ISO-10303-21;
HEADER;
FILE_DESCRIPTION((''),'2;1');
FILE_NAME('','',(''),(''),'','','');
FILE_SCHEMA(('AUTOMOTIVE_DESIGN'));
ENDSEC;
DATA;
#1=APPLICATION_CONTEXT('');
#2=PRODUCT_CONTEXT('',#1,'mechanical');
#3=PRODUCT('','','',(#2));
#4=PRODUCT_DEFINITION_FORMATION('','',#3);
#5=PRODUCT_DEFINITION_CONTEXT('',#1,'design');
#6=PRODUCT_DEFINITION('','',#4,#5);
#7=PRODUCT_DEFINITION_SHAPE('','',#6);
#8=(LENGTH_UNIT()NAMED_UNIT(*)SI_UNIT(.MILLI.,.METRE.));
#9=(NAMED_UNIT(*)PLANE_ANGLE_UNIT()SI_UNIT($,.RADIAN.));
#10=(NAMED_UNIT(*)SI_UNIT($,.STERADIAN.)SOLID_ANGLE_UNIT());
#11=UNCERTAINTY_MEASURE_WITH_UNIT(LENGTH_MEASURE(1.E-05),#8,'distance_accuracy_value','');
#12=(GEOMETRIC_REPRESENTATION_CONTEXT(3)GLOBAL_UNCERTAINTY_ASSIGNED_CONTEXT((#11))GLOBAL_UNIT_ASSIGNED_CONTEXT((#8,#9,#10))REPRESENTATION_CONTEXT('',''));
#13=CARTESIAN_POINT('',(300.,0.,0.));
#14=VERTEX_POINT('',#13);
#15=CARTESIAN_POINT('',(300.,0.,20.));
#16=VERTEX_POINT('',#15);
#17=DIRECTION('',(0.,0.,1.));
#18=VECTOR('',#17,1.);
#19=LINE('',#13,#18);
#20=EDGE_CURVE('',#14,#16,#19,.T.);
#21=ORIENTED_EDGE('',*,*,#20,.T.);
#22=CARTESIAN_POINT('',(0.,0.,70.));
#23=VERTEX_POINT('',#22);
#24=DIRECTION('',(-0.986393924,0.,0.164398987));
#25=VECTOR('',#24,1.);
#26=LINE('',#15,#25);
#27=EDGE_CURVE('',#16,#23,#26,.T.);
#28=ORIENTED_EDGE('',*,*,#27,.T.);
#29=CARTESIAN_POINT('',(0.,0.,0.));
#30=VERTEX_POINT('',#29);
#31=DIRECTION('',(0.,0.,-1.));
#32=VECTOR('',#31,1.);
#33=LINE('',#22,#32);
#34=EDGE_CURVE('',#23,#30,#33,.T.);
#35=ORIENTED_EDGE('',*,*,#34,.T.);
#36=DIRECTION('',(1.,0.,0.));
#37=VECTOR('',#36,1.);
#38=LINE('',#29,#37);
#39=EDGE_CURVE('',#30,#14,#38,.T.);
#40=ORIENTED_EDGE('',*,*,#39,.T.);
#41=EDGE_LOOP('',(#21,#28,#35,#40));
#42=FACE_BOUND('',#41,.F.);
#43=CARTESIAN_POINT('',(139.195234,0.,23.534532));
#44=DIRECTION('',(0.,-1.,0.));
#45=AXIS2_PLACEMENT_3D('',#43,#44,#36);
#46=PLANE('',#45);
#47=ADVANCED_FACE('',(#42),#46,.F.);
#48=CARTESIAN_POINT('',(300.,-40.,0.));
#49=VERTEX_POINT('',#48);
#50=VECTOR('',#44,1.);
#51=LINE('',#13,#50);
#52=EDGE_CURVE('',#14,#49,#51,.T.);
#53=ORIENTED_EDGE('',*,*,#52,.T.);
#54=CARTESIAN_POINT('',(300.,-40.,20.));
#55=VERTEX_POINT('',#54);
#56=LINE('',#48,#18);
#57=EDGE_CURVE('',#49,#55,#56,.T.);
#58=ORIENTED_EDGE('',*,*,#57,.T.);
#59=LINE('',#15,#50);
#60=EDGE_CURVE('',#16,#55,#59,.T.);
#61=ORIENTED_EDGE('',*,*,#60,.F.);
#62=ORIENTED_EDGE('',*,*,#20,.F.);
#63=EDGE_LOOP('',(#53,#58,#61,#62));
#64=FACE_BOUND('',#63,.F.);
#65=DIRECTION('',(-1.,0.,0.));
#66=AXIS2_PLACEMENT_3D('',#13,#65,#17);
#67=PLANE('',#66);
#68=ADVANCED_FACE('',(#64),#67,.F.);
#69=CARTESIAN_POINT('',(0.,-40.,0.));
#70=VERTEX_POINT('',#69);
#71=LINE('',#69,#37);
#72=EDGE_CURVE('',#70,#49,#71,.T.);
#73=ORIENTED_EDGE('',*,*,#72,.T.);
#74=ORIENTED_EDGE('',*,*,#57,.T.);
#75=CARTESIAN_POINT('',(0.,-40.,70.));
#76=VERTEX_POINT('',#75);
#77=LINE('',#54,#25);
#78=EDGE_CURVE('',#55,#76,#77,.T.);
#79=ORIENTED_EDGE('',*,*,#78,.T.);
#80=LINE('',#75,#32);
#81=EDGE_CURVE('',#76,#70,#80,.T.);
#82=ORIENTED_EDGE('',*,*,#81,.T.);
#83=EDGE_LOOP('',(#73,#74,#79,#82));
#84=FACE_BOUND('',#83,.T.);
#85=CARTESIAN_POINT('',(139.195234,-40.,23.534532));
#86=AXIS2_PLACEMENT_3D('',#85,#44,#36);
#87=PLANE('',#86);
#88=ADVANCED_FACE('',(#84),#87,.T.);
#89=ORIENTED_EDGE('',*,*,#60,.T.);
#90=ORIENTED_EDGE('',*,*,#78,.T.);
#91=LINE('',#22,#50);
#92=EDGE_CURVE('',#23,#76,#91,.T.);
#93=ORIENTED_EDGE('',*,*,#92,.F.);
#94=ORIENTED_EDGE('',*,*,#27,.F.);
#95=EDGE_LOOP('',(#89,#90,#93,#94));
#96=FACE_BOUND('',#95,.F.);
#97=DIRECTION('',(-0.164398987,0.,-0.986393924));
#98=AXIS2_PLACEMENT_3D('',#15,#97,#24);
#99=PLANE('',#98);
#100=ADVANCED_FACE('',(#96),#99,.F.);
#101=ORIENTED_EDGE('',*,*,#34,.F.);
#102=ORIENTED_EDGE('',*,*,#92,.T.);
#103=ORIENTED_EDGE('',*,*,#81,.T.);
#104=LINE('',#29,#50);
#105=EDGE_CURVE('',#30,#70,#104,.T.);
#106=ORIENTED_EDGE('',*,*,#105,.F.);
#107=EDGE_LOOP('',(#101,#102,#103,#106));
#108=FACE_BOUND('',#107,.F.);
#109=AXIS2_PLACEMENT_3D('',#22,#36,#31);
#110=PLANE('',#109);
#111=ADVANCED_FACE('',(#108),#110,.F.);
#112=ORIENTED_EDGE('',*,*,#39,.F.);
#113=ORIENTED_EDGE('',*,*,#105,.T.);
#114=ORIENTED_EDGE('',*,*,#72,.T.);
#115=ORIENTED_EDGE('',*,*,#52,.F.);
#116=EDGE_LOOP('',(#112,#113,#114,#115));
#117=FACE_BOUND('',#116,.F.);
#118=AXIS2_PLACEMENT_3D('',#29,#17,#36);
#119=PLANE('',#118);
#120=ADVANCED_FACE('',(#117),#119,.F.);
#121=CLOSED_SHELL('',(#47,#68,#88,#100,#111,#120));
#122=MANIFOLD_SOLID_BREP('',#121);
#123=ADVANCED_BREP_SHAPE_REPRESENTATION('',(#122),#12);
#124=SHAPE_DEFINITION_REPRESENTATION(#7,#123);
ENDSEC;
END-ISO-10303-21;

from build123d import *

# Parameters (mm, degrees)
F1_DEPTH = 40


# Not quite as in the source:
# - the program builds the solid bodies; features that only make, move or delete a surface that nothing else refers to are left out


with BuildPart() as f1:
    # F0 (on Front) → F1 (new body)
    with BuildSketch(Plane.XZ):
        Polygon((0, 70), (0, 0), (300, 0), (300, 20), align=None)
    extrude(amount=F1_DEPTH)


solid = f1.part
